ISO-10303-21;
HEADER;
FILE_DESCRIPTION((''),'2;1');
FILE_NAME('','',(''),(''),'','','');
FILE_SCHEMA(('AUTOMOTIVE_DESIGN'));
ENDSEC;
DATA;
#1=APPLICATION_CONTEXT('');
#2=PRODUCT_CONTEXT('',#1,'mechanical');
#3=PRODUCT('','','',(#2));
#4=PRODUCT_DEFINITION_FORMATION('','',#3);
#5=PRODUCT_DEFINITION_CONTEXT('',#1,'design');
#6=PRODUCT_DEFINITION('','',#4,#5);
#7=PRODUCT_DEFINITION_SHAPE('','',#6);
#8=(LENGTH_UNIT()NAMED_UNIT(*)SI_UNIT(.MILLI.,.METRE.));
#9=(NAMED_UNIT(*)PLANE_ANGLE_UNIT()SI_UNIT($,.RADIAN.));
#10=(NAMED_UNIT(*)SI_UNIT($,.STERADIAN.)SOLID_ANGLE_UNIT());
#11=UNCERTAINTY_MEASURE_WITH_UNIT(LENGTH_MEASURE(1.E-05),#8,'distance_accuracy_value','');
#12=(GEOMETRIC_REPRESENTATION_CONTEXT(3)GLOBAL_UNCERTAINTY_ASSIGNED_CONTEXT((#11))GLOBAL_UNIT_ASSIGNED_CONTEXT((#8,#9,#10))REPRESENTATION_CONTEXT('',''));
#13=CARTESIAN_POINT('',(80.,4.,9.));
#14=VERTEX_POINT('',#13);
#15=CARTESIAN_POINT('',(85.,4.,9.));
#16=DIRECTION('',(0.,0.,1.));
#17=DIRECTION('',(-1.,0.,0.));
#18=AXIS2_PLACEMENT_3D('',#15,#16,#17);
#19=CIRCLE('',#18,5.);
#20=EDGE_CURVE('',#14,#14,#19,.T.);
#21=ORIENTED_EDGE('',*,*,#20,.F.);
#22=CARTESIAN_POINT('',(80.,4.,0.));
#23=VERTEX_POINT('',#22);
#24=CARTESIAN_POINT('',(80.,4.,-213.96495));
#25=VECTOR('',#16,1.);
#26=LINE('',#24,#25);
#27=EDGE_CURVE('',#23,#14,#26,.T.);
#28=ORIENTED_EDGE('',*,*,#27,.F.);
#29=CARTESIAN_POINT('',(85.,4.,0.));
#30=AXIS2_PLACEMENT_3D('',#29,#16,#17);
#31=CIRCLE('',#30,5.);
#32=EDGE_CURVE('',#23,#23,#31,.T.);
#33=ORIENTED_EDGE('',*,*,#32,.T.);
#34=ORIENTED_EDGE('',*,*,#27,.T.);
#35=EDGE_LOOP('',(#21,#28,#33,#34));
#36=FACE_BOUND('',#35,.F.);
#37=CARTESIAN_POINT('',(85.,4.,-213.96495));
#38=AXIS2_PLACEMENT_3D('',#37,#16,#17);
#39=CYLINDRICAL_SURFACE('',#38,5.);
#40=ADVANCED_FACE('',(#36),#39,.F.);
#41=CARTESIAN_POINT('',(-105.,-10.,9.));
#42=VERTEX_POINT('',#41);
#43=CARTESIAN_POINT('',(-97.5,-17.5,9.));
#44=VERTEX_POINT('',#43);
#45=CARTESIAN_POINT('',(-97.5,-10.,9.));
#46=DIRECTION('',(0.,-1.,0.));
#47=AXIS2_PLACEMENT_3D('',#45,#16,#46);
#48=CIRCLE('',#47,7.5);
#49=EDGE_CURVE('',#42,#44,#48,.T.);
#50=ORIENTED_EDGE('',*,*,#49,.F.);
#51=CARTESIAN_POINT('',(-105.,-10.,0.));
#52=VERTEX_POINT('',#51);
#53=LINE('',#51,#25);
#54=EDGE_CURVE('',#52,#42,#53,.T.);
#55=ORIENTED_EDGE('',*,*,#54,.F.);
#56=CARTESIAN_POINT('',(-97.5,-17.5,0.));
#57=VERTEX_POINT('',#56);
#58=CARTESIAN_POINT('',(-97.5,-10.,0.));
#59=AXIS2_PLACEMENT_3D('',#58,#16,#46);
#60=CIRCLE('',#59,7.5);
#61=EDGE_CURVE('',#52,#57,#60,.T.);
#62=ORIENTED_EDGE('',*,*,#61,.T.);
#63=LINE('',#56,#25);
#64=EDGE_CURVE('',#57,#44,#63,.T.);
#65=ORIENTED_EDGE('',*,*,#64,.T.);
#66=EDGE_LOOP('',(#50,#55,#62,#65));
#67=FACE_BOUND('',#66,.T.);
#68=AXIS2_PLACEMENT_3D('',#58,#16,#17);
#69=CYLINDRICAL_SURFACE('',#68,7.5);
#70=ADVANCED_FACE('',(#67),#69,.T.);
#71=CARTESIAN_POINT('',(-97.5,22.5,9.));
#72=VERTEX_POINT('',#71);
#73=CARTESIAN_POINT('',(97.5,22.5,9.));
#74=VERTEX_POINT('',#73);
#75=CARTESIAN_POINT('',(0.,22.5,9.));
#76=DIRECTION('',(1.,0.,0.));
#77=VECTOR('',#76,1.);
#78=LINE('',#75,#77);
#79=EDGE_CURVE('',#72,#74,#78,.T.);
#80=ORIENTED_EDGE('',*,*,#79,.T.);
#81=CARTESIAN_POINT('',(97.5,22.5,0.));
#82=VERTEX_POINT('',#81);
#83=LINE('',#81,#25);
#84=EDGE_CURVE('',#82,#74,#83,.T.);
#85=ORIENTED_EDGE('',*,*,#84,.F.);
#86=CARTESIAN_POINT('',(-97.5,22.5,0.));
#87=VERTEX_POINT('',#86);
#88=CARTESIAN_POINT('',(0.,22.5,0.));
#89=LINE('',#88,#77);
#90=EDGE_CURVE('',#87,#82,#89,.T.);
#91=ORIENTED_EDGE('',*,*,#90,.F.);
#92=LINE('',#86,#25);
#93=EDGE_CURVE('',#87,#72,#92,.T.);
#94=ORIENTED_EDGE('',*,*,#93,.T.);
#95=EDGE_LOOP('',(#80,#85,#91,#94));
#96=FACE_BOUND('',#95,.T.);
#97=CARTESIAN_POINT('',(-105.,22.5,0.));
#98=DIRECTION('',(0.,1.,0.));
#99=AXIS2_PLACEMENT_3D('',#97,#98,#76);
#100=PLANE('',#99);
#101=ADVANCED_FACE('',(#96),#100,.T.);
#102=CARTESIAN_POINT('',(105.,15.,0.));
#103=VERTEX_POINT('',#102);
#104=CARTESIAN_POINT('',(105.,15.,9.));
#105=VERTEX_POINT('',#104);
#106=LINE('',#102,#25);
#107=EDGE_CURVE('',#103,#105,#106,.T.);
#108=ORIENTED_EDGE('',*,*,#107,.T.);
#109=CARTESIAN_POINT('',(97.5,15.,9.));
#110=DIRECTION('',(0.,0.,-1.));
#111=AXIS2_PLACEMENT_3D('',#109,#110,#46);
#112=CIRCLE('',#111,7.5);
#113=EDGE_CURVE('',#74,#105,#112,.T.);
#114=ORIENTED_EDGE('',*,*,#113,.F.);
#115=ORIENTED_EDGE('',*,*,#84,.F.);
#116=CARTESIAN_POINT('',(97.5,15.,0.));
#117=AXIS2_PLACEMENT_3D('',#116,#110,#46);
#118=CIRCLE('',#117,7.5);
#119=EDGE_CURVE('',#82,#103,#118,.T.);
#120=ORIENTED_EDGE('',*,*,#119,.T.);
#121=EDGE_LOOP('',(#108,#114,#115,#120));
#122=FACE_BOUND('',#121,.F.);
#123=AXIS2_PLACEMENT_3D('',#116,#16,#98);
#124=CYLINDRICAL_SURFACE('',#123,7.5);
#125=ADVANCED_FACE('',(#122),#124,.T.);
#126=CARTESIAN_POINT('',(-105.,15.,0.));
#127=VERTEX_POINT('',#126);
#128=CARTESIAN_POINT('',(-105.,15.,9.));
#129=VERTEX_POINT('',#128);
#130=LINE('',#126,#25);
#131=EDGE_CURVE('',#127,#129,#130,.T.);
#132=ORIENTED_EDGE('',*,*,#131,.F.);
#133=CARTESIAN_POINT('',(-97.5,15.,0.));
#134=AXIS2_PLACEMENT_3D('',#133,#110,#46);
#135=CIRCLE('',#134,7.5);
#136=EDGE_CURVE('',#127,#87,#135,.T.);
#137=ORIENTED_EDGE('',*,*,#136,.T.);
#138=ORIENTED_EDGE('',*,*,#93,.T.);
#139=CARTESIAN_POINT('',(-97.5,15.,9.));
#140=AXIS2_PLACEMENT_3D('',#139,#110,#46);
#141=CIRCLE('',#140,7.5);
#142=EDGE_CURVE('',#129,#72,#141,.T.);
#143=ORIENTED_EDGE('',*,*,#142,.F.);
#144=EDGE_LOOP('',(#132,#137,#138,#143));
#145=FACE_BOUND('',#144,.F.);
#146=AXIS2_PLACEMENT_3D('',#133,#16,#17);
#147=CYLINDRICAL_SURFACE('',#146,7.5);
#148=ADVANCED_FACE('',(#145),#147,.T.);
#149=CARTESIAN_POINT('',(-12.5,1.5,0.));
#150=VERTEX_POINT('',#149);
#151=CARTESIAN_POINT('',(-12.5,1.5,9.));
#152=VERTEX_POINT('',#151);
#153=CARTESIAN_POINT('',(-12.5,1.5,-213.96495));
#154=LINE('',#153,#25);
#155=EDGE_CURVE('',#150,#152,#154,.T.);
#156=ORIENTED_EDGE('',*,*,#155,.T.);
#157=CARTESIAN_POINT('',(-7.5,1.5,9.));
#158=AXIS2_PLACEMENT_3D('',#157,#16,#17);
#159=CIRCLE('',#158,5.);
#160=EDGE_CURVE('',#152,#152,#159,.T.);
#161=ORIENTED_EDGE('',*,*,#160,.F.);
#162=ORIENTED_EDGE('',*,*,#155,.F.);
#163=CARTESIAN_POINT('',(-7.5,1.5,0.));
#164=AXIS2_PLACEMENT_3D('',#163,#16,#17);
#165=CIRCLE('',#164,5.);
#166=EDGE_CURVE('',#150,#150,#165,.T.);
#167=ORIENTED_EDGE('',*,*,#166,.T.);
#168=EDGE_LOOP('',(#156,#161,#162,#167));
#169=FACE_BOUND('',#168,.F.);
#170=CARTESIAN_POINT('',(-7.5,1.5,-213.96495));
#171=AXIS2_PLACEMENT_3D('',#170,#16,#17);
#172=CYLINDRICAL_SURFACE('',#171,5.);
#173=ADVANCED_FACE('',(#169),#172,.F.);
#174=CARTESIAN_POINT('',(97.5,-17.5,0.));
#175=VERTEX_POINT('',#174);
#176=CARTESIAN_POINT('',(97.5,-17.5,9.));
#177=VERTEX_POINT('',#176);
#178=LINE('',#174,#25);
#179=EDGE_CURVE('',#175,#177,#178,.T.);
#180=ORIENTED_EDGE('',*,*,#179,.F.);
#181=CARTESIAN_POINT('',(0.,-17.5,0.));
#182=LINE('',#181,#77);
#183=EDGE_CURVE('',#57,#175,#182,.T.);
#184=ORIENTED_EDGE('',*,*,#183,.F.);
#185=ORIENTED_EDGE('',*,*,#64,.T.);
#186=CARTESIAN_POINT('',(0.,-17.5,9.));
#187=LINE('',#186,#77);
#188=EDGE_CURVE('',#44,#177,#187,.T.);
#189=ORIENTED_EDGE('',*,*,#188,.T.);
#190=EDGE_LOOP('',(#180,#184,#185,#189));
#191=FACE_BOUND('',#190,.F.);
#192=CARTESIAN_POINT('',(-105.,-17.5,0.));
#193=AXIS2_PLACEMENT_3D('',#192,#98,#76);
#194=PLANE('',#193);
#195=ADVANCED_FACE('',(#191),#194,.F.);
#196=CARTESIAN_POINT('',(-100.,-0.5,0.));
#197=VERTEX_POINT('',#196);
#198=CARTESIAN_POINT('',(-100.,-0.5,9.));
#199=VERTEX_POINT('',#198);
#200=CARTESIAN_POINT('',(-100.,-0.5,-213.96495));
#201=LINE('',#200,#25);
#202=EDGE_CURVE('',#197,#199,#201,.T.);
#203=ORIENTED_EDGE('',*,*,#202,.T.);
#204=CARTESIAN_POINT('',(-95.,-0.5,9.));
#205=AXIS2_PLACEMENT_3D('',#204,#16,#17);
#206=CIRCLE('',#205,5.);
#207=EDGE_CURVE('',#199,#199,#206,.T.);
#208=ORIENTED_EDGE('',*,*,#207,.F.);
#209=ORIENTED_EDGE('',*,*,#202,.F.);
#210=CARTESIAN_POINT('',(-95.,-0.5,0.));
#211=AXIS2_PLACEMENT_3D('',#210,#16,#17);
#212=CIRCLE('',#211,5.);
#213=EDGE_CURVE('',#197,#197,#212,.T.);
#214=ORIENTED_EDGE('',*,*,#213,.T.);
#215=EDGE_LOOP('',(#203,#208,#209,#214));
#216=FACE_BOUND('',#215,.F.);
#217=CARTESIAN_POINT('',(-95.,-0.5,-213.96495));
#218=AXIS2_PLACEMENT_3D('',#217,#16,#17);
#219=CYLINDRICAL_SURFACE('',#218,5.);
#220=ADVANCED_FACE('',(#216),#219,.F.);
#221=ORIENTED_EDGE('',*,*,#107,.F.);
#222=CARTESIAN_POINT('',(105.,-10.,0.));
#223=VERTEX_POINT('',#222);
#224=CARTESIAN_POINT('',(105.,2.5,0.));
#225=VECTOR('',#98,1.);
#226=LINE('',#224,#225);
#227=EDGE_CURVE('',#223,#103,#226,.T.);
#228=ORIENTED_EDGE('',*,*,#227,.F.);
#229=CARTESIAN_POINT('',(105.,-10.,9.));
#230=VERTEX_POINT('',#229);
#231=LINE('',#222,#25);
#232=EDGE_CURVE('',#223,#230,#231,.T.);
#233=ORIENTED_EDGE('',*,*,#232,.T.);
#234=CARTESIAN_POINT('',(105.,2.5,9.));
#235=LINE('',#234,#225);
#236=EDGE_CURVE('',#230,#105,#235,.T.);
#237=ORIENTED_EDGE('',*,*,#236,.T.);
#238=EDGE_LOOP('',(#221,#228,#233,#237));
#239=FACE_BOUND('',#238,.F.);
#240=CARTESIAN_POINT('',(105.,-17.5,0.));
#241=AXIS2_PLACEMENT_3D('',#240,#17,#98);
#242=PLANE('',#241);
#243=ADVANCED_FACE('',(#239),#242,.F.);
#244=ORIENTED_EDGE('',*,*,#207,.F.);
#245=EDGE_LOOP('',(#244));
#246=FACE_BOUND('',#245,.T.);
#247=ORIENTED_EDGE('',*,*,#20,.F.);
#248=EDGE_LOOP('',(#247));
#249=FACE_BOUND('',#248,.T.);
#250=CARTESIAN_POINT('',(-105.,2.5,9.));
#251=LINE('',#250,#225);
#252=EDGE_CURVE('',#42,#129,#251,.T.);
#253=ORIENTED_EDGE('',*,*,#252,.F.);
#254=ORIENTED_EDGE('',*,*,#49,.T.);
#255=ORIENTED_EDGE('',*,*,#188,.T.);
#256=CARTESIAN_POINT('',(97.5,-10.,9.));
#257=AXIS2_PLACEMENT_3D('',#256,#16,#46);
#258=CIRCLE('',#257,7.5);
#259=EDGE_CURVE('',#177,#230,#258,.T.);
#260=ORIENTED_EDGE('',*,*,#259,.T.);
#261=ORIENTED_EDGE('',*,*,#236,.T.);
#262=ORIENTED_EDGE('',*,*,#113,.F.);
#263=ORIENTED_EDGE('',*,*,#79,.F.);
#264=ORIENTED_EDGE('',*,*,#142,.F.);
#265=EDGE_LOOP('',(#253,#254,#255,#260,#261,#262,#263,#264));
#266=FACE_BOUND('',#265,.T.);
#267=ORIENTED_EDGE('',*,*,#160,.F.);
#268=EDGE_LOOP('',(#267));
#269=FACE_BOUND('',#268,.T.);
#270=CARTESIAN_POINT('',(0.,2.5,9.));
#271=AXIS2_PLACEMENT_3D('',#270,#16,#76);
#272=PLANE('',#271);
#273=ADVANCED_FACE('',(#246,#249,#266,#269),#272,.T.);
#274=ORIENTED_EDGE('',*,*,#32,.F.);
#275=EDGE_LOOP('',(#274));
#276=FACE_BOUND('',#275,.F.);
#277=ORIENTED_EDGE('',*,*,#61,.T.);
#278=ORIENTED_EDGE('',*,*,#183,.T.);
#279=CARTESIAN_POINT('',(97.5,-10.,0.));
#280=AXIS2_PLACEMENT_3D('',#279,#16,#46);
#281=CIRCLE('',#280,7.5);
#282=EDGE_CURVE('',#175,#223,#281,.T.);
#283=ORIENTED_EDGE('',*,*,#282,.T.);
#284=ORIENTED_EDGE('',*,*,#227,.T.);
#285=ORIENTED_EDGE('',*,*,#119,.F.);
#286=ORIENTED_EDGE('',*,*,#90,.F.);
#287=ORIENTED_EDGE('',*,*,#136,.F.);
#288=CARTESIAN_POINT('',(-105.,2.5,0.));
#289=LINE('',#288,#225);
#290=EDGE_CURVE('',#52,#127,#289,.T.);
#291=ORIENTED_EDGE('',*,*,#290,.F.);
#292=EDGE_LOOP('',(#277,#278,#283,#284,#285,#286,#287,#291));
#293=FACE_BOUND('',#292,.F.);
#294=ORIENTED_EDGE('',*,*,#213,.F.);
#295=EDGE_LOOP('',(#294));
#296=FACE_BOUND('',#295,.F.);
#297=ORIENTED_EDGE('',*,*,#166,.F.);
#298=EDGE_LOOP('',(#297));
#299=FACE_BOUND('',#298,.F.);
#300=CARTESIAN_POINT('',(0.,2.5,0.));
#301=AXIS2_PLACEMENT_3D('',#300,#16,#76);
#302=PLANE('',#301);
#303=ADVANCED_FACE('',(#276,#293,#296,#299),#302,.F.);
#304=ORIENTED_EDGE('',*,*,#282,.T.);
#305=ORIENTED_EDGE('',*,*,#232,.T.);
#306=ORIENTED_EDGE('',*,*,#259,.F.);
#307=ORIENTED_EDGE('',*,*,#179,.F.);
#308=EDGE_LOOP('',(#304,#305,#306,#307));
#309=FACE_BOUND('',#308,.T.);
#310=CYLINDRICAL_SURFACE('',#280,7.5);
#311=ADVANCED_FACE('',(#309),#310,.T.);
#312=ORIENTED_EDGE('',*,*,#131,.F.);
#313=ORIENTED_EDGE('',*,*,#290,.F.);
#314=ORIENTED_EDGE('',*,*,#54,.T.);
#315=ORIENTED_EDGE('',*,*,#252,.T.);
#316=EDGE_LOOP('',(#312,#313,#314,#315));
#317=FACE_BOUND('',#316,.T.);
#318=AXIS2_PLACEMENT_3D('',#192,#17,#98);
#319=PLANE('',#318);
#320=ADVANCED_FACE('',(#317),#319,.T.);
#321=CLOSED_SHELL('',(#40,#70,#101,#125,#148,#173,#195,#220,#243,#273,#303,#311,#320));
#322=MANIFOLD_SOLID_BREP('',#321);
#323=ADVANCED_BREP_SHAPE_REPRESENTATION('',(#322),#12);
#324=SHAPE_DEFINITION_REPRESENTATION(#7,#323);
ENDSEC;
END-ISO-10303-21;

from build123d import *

# Parameters (mm, degrees)
F0_W     = 210
F0_H     = 40
F1_DEPTH = 9
F2_D     = 10
F3_R     = 7.5


with BuildPart() as f1:
    # F0 (on Top) → F1 (new body)
    with BuildSketch(Plane.XY):
        with Locations((0, 2.5)):
            Rectangle(F0_W, F0_H)
    extrude(amount=F1_DEPTH)

    # F2 (through all)
    with Locations(Plane(origin=(0, 0, 0), x_dir=(1, 0, 0), z_dir=(0, 0, -1))):
        with Locations((-95, 0.5), (-7.5, -1.5), (85, -4)):
            Hole(F2_D / 2)

    # F3
    f3_edges = [f1.edges().sort_by_distance(p)[0] for p in [
        (-105, 22.5, 4.5),
        (-105, -17.5, 4.5),
        (105, 22.5, 4.5),
        (105, -17.5, 4.5),
    ]]
    fillet(f3_edges, radius=F3_R)


solid = f1.part
